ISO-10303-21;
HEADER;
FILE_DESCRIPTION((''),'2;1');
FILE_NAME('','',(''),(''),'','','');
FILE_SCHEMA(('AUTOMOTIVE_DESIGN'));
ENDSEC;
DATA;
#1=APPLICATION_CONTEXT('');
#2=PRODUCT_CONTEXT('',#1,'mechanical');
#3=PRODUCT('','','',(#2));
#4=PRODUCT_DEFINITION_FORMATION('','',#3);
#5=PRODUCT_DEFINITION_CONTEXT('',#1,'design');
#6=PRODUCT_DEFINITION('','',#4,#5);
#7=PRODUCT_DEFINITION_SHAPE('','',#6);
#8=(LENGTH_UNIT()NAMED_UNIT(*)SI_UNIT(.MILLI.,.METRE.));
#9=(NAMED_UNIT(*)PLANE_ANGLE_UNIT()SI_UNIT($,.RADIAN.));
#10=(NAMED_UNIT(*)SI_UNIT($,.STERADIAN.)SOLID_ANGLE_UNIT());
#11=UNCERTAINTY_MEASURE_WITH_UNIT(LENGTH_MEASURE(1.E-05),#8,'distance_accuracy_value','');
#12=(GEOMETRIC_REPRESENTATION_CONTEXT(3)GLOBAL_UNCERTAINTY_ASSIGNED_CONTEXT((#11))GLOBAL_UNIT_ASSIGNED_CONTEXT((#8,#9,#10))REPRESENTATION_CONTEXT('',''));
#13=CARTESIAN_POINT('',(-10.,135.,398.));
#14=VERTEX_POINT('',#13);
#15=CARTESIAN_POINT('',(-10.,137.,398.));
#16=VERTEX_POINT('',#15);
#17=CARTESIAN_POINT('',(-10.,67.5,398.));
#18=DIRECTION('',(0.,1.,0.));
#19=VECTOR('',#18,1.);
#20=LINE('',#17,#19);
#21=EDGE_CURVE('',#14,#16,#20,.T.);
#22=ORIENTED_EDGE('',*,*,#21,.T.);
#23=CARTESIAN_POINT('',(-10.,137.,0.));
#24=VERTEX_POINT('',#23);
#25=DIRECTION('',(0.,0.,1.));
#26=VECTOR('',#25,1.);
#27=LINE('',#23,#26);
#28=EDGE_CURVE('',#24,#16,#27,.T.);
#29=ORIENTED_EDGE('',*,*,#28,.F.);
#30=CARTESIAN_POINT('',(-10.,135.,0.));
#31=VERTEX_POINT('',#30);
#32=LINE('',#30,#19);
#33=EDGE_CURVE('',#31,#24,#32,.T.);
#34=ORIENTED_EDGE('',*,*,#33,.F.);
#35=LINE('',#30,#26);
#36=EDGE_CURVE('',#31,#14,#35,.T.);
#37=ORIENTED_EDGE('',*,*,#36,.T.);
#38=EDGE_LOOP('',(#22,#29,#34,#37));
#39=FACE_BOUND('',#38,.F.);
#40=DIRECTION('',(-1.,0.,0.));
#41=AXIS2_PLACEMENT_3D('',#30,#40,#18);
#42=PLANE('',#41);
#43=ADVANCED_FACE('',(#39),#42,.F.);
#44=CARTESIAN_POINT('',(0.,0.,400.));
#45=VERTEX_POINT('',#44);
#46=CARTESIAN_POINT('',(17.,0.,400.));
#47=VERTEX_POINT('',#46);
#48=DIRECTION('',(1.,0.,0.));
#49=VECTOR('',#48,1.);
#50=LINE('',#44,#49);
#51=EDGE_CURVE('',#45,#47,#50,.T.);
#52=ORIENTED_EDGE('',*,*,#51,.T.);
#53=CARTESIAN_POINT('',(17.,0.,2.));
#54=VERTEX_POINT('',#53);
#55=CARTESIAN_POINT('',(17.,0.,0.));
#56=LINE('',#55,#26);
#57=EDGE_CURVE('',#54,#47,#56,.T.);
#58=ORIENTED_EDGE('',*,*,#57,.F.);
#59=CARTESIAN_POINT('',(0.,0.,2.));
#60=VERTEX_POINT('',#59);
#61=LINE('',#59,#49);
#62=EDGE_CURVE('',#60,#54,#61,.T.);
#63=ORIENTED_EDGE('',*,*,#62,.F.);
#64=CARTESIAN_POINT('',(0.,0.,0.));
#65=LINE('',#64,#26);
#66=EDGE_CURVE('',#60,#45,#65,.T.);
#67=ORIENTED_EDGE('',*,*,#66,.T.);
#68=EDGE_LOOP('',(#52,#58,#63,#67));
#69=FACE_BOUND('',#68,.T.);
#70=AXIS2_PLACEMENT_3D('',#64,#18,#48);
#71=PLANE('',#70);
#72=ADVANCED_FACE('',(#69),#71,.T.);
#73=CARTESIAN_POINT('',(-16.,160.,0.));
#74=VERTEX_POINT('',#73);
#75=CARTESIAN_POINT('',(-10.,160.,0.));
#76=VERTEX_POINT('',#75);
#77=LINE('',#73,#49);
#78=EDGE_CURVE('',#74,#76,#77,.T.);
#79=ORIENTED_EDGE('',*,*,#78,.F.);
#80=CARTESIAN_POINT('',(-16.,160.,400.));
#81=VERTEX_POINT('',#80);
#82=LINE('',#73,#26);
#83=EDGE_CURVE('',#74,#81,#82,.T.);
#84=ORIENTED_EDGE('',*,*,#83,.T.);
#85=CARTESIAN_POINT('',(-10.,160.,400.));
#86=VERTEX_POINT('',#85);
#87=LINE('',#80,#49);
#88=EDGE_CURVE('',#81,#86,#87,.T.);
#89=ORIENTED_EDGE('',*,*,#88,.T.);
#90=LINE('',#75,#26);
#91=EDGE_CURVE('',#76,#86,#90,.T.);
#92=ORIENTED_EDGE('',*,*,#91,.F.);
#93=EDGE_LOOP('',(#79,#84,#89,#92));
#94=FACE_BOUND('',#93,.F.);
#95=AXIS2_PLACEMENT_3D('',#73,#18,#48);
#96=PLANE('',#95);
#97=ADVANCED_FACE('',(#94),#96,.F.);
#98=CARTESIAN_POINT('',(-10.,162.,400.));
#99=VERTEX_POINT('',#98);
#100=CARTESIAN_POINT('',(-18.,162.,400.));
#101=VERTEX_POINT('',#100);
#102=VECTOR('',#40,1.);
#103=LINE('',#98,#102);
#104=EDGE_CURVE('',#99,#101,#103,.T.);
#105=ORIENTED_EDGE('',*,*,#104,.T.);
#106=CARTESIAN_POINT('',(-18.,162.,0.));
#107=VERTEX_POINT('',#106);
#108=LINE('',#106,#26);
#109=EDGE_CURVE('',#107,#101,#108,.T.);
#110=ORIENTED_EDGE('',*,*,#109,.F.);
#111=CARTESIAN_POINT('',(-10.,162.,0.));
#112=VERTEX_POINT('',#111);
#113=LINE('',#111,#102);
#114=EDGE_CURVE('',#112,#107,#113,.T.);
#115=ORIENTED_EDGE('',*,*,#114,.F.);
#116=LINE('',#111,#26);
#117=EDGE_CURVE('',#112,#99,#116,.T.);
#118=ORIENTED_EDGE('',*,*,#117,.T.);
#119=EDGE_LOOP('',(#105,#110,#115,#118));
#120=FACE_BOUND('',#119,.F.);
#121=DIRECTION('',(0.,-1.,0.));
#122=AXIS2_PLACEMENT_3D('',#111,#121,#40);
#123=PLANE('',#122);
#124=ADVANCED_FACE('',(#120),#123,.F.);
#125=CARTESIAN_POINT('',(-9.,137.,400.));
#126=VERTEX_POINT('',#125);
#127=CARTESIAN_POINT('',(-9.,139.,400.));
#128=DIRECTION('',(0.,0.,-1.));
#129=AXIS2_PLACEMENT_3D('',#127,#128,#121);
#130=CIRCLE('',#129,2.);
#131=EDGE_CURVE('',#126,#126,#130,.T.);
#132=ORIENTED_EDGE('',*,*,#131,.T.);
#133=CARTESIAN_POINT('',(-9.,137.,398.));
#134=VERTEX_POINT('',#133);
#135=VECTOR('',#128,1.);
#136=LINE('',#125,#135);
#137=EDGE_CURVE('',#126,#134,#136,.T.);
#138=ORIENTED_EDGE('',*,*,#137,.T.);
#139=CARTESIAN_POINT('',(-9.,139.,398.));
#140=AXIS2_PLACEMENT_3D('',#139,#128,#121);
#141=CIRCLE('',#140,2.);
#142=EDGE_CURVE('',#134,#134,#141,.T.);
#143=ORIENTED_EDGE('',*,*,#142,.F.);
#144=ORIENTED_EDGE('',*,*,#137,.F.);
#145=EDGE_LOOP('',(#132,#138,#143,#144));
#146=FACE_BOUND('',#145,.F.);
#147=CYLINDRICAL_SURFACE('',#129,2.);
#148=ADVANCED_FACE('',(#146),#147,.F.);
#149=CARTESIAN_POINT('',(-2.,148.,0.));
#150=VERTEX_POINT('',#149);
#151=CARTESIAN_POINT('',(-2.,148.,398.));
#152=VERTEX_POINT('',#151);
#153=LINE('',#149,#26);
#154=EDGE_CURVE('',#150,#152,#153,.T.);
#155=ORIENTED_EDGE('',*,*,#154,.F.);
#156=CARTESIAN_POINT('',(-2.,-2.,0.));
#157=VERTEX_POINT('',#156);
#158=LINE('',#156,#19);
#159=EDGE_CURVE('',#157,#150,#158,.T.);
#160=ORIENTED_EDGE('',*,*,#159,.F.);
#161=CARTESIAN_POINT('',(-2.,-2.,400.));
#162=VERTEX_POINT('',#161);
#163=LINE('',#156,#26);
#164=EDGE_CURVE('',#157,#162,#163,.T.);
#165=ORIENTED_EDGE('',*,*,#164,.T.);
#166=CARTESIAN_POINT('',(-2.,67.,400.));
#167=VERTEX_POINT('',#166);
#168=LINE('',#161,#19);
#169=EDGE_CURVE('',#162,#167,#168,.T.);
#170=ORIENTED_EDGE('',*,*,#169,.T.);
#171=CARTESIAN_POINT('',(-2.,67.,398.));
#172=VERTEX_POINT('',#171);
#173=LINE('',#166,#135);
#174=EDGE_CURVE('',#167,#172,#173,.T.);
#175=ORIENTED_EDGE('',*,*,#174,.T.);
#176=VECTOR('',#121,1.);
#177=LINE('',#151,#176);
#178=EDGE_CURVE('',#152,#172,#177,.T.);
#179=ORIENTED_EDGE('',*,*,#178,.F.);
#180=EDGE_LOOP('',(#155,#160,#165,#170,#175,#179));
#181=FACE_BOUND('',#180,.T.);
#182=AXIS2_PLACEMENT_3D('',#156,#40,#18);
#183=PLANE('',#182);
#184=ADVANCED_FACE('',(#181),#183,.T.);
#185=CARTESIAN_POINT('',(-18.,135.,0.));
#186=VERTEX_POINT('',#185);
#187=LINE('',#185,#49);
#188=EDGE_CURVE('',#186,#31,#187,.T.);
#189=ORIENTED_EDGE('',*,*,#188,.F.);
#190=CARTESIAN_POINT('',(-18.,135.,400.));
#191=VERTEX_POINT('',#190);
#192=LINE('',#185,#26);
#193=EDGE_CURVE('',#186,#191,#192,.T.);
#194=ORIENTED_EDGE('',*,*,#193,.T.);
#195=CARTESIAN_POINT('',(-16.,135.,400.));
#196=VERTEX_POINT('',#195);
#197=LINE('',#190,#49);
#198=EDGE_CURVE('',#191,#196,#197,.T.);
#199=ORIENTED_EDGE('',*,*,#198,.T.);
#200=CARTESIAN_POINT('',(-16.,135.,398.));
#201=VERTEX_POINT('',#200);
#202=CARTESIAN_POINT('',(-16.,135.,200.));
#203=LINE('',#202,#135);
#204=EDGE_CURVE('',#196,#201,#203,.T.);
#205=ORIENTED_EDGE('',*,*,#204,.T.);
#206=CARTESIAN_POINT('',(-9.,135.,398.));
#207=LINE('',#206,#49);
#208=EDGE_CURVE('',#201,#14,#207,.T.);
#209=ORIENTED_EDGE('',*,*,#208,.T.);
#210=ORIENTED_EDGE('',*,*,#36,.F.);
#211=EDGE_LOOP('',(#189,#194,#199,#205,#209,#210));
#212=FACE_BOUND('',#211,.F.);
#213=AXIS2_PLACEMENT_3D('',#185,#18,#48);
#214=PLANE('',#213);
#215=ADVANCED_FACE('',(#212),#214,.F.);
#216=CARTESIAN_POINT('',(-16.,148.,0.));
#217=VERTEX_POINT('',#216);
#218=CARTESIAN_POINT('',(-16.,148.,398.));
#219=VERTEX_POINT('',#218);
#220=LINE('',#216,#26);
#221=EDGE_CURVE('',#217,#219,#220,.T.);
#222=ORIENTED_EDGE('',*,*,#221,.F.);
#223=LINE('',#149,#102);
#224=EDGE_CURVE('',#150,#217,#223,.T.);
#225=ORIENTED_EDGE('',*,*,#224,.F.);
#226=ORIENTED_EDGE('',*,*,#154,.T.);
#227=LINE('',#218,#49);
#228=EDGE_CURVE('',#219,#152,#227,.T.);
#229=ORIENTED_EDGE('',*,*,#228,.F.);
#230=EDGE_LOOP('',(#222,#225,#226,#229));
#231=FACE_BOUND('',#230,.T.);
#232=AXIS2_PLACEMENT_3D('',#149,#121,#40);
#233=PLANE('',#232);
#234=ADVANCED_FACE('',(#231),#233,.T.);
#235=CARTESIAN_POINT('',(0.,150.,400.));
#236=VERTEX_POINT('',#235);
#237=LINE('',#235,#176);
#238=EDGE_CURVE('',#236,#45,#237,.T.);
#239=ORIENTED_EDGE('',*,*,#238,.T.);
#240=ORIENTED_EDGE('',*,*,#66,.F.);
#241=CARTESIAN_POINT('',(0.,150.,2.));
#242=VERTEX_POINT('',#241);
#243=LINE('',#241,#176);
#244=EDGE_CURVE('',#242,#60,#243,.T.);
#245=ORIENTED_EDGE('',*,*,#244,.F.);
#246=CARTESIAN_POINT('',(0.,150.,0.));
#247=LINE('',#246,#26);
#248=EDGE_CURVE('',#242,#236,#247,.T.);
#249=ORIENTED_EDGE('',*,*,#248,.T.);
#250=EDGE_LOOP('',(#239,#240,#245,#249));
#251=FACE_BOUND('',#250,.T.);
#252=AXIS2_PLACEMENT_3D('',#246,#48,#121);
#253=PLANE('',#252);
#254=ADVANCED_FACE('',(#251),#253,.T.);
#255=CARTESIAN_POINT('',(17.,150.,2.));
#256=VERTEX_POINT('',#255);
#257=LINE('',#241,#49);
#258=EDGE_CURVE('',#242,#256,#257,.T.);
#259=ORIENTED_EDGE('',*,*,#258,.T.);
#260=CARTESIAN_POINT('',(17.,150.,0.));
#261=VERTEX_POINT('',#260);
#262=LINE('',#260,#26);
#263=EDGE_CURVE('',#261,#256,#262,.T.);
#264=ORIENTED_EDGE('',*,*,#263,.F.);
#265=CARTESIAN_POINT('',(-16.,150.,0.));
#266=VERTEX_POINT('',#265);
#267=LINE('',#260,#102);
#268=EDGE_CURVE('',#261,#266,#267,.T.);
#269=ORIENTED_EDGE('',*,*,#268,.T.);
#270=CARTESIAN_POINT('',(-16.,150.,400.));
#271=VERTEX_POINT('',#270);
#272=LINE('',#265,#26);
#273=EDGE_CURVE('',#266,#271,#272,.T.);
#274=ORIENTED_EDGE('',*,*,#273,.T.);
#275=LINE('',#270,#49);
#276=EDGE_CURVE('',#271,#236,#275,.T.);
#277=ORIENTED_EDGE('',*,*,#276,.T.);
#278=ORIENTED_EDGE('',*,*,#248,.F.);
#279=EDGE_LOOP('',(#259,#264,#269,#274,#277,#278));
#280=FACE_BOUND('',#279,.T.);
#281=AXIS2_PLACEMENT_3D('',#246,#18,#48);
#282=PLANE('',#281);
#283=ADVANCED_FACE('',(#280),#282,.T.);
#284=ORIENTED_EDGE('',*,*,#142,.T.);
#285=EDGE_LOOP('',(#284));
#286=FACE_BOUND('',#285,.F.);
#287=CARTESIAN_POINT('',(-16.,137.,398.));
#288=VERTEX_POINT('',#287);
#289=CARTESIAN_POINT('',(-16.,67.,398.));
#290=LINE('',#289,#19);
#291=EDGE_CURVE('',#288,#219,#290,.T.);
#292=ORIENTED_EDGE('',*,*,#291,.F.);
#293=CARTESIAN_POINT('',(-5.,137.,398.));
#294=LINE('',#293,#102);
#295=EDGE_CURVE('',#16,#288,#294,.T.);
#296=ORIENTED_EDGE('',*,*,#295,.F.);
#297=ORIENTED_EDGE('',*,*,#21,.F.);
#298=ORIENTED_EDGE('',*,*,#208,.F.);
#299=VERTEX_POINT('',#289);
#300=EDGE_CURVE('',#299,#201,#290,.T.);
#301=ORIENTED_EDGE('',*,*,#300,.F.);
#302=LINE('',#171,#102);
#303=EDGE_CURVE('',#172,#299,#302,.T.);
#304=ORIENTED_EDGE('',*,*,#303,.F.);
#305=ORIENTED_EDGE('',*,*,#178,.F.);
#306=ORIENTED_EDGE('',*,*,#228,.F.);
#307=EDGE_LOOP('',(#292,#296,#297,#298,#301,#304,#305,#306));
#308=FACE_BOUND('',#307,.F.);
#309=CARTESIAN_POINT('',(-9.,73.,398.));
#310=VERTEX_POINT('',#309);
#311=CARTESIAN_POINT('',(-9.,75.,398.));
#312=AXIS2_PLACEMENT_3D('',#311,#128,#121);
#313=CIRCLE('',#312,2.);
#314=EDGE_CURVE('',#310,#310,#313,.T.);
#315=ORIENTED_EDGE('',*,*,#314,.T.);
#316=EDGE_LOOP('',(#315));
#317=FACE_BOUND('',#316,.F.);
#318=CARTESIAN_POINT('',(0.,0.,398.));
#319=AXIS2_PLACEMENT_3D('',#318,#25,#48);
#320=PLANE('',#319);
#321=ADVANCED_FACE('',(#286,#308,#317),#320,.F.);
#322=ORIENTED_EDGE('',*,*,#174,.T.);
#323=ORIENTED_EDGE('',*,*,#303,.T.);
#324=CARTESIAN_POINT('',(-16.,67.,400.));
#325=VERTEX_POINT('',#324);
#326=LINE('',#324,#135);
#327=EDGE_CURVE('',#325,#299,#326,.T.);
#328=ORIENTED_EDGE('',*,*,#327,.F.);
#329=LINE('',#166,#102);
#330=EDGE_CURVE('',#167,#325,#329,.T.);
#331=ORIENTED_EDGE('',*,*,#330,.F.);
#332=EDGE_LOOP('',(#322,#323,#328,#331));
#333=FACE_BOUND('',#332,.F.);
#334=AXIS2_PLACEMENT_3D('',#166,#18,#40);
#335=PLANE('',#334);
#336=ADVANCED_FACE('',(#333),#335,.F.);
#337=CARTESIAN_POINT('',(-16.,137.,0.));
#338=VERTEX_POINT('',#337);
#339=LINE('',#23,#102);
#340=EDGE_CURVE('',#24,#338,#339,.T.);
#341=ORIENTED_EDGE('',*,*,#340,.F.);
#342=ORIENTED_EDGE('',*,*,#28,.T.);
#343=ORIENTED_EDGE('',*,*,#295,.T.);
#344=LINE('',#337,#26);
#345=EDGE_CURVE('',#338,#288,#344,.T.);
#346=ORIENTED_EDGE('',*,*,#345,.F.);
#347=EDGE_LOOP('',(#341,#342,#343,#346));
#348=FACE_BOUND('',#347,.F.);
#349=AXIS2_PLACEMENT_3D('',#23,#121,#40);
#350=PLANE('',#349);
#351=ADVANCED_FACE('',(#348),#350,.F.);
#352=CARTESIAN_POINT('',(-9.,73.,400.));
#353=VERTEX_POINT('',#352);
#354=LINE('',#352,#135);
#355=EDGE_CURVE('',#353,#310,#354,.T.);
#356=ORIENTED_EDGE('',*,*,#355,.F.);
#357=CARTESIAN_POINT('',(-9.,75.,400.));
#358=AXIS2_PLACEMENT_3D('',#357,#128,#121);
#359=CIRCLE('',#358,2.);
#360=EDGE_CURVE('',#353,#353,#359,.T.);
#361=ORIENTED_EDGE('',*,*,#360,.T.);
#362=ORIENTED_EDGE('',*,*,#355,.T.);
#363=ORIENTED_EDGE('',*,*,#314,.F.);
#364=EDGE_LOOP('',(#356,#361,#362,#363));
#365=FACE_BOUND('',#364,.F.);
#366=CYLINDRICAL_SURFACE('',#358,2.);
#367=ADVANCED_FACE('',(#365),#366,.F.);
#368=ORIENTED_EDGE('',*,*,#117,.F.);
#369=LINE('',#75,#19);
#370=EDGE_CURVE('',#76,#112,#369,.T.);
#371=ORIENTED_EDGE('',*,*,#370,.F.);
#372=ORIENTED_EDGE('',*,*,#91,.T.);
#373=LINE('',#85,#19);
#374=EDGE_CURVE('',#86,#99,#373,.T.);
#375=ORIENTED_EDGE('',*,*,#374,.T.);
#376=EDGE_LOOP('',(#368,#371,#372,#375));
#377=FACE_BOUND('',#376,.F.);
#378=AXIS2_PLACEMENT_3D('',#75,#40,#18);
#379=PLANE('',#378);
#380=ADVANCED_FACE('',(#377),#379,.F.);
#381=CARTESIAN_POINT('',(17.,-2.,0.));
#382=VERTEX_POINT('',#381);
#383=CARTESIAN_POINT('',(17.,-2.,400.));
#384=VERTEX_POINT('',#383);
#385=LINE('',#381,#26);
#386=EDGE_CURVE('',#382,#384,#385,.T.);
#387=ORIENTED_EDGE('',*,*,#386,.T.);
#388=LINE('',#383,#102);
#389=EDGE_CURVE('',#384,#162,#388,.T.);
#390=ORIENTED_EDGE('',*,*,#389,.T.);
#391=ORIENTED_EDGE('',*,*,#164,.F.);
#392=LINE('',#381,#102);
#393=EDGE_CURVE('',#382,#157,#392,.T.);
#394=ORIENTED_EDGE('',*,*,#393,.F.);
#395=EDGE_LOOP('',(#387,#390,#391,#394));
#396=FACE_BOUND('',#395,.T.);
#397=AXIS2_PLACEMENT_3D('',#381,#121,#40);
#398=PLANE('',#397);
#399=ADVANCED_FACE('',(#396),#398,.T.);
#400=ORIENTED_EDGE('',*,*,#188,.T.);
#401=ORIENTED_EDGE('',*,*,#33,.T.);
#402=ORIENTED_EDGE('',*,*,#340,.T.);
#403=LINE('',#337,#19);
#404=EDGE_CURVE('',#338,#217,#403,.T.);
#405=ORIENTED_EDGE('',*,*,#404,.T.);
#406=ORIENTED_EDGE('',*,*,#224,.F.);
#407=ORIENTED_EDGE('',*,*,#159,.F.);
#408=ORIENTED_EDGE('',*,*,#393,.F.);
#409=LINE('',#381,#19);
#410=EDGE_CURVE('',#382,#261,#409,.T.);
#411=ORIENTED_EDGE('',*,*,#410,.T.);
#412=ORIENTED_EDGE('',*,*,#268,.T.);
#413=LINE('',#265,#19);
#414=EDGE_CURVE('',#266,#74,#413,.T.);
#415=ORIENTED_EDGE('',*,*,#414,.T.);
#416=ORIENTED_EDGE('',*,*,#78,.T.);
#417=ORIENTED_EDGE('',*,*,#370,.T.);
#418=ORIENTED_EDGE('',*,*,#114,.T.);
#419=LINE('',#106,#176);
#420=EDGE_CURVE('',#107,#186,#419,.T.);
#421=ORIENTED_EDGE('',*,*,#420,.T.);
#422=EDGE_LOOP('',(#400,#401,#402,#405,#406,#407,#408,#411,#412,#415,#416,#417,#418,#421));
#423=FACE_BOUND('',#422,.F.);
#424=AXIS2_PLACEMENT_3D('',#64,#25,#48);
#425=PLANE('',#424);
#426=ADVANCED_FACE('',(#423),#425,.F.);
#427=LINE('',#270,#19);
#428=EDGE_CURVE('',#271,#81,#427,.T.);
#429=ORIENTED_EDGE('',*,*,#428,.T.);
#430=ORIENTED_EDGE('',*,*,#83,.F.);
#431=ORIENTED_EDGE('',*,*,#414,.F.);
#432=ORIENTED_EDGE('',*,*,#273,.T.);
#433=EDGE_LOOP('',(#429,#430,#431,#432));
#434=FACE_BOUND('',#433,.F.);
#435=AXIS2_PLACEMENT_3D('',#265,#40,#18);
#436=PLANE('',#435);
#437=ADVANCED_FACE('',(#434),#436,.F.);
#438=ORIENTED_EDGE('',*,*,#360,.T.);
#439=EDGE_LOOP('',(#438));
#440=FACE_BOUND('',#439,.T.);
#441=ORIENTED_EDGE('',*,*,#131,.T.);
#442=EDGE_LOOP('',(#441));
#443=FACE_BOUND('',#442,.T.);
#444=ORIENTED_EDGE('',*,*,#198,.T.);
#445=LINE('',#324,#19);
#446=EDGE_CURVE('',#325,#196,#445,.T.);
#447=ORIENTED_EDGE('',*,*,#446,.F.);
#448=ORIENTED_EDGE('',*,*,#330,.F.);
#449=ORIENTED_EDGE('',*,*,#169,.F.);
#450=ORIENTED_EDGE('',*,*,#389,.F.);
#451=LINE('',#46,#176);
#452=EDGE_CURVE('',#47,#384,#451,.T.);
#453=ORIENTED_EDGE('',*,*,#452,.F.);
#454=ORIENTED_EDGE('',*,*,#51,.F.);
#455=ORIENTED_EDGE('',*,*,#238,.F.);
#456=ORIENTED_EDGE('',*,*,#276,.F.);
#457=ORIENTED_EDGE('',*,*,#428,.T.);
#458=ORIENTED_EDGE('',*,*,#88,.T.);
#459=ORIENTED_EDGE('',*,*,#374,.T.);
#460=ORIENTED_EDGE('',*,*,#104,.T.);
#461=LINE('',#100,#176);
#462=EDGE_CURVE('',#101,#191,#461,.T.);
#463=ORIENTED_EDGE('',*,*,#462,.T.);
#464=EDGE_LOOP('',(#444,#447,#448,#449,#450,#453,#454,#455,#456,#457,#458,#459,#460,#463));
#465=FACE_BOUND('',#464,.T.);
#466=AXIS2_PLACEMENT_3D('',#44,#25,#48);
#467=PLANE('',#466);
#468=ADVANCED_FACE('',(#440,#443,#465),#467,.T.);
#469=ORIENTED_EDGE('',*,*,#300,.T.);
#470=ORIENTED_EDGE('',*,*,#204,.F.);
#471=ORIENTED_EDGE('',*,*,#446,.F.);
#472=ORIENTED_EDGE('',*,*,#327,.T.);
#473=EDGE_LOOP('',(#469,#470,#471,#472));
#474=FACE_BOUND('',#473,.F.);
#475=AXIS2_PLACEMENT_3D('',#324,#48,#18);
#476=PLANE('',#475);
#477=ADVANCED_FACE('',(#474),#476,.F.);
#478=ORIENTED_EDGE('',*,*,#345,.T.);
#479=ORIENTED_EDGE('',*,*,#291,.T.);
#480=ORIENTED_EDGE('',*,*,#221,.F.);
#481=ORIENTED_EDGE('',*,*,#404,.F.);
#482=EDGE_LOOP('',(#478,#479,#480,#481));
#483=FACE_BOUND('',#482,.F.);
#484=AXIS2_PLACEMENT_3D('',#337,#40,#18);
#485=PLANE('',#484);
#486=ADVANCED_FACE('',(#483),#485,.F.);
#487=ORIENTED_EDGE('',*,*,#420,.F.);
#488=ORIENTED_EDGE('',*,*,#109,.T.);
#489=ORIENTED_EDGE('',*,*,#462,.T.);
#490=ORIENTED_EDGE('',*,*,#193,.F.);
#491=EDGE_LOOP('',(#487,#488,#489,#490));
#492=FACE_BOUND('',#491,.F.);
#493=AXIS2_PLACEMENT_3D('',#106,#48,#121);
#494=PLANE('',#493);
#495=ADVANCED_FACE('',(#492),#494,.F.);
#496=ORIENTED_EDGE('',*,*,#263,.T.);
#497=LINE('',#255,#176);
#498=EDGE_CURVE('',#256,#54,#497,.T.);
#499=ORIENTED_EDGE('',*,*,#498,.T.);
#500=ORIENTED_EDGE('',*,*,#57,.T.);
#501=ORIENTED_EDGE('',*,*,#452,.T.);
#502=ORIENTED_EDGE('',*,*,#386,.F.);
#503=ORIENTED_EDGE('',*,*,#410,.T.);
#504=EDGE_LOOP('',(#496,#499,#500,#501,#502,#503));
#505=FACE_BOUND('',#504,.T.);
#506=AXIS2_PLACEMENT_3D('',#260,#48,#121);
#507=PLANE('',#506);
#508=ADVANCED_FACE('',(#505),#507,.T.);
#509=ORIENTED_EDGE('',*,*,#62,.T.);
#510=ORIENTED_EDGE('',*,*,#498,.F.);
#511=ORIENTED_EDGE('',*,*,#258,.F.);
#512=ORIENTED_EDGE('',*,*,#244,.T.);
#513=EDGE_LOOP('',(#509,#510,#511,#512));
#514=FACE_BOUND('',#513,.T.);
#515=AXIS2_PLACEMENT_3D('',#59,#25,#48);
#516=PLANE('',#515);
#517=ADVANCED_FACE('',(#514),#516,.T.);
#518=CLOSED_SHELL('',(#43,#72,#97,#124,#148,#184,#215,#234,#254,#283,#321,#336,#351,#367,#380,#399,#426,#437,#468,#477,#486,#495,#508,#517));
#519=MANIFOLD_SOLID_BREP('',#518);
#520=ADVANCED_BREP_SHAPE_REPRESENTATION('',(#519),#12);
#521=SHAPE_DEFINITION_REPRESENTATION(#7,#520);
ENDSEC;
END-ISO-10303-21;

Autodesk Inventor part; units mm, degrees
ref_plane "YZ Plane" through (0, 0, 0) normal (1, 0, 0) x (0, 1, 0)
ref_plane "XZ Plane" through (0, 0, 0) normal (0, 1, 0) x (-1, 0, 0)
ref_plane "XY Plane" through (0, 0, 0) normal (0, 0, 1) x (1, 0, 0)
sketch "Szkic1" plane through (0, 0, 0) normal (0, 0, 1) x (1, 0, 0)
  line L0 (0, 0) -> (17, 0)
  line L1 (17, 0) -> (17, -2)
  line L2 (17, -2) -> (-2, -2)
  line L3 (-2, -2) -> (-2, 148)
  line L4 (-2, 148) -> (-16, 148)
  line L5 (-16, 148) -> (-16, 150)
  line L6 (-16, 150) -> (0, 150)
  line L7 (0, 150) -> (0, 0)
  line L8 (0, 150) -> (17, 150)
  line L9 (17, 150) -> (17, 0)
  line L10 (-16, 150) -> (-16, 160)
  line L11 (-16, 160) -> (-10, 160)
  line L12 (-10, 160) -> (-10, 162)
  line L13 (-10, 162) -> (-18, 162)
  line L14 (-18, 162) -> (-18, 135)
  line L15 (-18, 135) -> (-10, 135)
  line L16 (-10, 135) -> (-10, 137)
  line L17 (-10, 137) -> (-16, 137)
  line L18 (-16, 137) -> (-16, 148)
  dimension "d0" = 17
  dimension "d1" = 2
  dimension "d2" = 2
  dimension "d3" = 148
  dimension "d4" = 2
  dimension "d5" = 14
  dimension "d10" = 2
  dimension "d11" = 6
  dimension "d12" = 2
  dimension "d13" = 2
  dimension "d14" = 27
  dimension "d15" = 11
extrude "Wyciągnięcie proste1" add sketch "Szkic1" along normal blind 400 contours L0 L1 L2 L3 L4 L5 L6 L7 | L5 L18 L17 L16 L15 L14 L13 L12 L11 L10
extrude "Wyciągnięcie proste2" add sketch "Szkic1" along normal blind 2 contours L7 L8 L9 L0
sketch "Szkic2" plane through (0, 0, 400) normal (0, 0, 1) x (1, 0, 0)
  line L0 (-16, 148) -> (-2, 148) projected
  line L1 (-2, 148) -> (-2, -2) projected
  line L2 (17, 0) -> (0, 0) projected
  line L3 (-16, 148) -> (-2, 148)
  line L4 (-2, 148) -> (-2, 67)
  line L5 (-2, 67) -> (-16, 67)
  line L6 (-16, 67) -> (-16, 148)
  line L7 (-9, 67) -> (-9, 148) construction
  point P0 (-9, 75)
  point P1 (-9, 139)
  dimension "d16" = 75
  dimension "d17" = 64
  dimension "d18" = 8
extrude "Wyciągnięcie proste3" add sketch "Szkic2" against normal blind 2
hole "Otwór1" at (-9, 75, 400) at (-9, 139, 400) direction (0, 0, -1) diameter 4 end up to surface
properties part number "bok szuflady metalbox 150x400mm lewy"
